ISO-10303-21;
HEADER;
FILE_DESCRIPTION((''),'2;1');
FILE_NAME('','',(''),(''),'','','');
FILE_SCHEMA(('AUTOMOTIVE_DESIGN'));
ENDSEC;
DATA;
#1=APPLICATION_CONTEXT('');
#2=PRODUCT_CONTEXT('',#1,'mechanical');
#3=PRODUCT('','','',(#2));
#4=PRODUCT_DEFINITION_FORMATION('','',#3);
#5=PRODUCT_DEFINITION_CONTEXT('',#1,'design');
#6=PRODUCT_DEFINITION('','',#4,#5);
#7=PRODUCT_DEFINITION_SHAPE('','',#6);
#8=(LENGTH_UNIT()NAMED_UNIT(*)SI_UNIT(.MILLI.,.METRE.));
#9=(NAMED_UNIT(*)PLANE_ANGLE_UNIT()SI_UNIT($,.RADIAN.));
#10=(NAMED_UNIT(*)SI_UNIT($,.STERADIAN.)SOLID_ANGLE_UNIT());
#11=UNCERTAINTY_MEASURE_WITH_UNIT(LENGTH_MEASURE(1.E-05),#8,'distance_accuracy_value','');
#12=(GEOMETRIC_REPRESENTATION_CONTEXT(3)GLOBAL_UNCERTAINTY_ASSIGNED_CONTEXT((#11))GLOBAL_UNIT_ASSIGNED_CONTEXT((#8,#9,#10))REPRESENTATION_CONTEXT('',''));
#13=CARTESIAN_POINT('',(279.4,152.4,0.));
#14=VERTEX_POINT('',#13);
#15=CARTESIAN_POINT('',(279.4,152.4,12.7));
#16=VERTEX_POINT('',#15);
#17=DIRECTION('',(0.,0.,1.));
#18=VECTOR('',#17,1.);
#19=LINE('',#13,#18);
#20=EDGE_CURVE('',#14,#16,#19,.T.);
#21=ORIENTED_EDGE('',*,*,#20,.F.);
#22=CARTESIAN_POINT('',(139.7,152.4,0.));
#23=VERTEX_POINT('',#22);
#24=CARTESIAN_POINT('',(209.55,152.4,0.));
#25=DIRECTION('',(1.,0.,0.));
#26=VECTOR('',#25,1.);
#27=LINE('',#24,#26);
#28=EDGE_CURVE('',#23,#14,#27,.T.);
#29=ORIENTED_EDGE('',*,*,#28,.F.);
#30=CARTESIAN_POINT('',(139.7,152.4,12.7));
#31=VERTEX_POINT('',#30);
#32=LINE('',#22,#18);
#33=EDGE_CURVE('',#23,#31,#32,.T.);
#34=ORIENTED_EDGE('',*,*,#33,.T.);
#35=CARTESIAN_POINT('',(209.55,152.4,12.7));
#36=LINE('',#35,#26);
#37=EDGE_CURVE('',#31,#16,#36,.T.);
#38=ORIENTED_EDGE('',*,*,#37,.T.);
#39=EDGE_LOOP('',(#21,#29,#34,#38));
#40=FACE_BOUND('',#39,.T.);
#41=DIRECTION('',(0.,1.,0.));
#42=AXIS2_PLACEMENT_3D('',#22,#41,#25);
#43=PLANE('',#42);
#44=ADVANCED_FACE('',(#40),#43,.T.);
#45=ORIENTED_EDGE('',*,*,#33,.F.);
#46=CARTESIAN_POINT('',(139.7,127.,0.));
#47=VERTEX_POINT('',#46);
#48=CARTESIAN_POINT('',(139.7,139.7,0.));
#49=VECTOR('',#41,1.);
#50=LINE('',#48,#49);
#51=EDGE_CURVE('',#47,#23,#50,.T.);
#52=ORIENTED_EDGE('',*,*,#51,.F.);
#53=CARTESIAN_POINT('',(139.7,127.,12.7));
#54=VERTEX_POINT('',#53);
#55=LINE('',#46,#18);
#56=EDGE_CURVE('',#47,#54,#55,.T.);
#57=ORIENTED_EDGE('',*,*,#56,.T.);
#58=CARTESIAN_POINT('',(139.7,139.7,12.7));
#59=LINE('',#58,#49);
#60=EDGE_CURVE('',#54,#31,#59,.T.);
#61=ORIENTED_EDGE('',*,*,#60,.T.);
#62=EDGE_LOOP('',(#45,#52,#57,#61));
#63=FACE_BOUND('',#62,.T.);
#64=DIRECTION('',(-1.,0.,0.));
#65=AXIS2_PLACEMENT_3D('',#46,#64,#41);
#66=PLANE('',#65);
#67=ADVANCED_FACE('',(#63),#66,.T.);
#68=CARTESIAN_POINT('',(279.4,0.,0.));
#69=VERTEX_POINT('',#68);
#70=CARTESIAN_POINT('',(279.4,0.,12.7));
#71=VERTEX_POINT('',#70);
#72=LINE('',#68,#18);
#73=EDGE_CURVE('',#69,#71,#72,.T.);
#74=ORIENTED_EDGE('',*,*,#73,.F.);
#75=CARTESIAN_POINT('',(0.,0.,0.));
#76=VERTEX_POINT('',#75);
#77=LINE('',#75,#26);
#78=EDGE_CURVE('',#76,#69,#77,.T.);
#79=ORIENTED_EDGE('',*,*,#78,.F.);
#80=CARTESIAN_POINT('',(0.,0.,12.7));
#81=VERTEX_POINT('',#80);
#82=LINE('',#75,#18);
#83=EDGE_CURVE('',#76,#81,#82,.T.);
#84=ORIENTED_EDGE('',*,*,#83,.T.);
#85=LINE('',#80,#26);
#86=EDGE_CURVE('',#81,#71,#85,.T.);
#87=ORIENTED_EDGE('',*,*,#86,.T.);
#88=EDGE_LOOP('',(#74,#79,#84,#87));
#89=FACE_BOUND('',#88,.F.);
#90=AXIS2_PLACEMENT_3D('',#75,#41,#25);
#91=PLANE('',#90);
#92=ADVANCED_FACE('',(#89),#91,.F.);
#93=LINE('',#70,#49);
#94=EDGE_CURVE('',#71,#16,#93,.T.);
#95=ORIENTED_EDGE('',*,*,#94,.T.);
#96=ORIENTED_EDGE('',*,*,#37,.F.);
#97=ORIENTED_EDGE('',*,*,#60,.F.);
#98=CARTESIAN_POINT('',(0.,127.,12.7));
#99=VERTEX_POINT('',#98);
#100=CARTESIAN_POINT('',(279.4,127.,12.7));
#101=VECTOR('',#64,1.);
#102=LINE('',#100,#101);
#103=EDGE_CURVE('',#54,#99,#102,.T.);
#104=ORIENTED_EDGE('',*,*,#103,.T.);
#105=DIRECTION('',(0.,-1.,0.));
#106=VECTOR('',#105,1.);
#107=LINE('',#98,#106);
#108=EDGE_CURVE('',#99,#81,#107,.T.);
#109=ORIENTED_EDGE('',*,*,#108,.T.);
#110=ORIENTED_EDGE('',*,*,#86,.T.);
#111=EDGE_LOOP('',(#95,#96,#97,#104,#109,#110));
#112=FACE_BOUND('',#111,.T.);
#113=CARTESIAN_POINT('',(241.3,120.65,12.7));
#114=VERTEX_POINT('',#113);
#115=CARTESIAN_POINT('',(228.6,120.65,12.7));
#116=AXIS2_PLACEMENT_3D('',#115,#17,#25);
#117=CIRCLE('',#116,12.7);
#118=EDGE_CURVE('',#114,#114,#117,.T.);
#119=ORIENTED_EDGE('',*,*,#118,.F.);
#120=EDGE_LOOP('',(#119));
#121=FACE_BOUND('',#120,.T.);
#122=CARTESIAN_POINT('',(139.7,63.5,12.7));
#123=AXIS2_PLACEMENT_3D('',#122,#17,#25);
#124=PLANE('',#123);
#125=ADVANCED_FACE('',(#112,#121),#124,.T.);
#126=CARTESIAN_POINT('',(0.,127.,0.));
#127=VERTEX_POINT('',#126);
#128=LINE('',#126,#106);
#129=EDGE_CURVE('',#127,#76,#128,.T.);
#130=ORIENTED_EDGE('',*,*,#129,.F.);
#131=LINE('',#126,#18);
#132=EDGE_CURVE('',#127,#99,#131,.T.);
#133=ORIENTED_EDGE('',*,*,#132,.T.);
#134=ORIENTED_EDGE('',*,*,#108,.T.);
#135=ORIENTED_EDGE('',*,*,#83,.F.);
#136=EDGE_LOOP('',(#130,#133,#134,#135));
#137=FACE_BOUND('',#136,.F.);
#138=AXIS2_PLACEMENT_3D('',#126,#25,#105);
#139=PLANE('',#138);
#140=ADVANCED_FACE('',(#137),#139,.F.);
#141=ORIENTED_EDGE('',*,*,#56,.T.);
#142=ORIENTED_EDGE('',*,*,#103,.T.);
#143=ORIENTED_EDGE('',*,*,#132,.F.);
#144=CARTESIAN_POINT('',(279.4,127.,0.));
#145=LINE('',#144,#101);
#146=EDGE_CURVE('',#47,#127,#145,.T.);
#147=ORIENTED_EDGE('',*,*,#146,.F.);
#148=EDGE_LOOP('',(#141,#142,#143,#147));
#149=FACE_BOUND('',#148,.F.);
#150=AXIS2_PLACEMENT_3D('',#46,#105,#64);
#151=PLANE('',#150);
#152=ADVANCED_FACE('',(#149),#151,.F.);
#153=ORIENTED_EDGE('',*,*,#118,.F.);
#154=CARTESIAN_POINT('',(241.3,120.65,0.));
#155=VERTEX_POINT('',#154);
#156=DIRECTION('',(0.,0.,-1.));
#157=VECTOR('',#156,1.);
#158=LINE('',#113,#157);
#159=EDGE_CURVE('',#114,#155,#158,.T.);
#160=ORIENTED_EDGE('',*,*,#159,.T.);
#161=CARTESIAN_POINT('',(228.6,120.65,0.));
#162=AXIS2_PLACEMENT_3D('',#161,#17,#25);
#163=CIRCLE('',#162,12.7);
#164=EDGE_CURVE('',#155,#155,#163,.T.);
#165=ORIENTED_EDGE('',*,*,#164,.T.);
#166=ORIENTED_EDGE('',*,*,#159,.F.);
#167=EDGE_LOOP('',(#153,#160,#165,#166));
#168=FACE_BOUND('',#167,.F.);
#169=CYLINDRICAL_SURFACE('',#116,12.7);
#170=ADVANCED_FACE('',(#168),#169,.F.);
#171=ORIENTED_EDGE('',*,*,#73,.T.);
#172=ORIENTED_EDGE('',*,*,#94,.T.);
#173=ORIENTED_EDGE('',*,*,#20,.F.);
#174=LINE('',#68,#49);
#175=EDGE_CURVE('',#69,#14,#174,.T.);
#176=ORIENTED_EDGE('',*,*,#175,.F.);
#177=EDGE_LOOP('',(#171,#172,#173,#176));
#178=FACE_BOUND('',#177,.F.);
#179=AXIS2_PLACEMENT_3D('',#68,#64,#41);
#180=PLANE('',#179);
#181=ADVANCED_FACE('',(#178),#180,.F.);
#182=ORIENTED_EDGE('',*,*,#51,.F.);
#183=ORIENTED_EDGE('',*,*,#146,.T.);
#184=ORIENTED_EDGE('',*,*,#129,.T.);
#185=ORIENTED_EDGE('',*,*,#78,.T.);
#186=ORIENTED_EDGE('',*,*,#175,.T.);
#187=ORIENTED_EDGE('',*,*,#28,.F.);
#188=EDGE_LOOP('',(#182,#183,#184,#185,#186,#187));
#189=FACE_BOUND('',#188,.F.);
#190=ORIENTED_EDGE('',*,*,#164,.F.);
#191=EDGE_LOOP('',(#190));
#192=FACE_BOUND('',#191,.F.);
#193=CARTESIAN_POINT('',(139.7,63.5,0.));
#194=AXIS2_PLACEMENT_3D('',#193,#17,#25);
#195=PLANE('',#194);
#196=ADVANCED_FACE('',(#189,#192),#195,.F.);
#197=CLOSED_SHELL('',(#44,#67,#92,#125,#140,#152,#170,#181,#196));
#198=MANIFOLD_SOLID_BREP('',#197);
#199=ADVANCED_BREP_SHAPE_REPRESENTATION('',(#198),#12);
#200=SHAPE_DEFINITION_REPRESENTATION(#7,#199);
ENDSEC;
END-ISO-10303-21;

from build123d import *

# Parameters (mm, degrees)
F0_W     = 139.7
F0_H     = 25.4
F1_DEPTH = 12.7
F2_R     = 12.7
F3_DEPTH = 12.701


# Not quite as in the source:
# - a feature names something its author has since deleted; it is built from what else it names


with BuildPart() as f1:
    # F0 (on Top) → F1 (new body)
    with BuildSketch(Plane.XY):
        Polygon((0, 127), (0, 0), (279.4, 0), (279.4, 127), (139.7, 127), align=None)
        with Locations((209.55, 139.7)):
            Rectangle(F0_W, F0_H)
    extrude(amount=F1_DEPTH)

    # F2 (on face) → F3 (cut, through all)
    with BuildSketch(Plane.XY.offset(12.7)):
        with Locations((228.6, 120.65)):
            Circle(F2_R)
    extrude(amount=-F3_DEPTH, mode=Mode.SUBTRACT)


solid = f1.part
